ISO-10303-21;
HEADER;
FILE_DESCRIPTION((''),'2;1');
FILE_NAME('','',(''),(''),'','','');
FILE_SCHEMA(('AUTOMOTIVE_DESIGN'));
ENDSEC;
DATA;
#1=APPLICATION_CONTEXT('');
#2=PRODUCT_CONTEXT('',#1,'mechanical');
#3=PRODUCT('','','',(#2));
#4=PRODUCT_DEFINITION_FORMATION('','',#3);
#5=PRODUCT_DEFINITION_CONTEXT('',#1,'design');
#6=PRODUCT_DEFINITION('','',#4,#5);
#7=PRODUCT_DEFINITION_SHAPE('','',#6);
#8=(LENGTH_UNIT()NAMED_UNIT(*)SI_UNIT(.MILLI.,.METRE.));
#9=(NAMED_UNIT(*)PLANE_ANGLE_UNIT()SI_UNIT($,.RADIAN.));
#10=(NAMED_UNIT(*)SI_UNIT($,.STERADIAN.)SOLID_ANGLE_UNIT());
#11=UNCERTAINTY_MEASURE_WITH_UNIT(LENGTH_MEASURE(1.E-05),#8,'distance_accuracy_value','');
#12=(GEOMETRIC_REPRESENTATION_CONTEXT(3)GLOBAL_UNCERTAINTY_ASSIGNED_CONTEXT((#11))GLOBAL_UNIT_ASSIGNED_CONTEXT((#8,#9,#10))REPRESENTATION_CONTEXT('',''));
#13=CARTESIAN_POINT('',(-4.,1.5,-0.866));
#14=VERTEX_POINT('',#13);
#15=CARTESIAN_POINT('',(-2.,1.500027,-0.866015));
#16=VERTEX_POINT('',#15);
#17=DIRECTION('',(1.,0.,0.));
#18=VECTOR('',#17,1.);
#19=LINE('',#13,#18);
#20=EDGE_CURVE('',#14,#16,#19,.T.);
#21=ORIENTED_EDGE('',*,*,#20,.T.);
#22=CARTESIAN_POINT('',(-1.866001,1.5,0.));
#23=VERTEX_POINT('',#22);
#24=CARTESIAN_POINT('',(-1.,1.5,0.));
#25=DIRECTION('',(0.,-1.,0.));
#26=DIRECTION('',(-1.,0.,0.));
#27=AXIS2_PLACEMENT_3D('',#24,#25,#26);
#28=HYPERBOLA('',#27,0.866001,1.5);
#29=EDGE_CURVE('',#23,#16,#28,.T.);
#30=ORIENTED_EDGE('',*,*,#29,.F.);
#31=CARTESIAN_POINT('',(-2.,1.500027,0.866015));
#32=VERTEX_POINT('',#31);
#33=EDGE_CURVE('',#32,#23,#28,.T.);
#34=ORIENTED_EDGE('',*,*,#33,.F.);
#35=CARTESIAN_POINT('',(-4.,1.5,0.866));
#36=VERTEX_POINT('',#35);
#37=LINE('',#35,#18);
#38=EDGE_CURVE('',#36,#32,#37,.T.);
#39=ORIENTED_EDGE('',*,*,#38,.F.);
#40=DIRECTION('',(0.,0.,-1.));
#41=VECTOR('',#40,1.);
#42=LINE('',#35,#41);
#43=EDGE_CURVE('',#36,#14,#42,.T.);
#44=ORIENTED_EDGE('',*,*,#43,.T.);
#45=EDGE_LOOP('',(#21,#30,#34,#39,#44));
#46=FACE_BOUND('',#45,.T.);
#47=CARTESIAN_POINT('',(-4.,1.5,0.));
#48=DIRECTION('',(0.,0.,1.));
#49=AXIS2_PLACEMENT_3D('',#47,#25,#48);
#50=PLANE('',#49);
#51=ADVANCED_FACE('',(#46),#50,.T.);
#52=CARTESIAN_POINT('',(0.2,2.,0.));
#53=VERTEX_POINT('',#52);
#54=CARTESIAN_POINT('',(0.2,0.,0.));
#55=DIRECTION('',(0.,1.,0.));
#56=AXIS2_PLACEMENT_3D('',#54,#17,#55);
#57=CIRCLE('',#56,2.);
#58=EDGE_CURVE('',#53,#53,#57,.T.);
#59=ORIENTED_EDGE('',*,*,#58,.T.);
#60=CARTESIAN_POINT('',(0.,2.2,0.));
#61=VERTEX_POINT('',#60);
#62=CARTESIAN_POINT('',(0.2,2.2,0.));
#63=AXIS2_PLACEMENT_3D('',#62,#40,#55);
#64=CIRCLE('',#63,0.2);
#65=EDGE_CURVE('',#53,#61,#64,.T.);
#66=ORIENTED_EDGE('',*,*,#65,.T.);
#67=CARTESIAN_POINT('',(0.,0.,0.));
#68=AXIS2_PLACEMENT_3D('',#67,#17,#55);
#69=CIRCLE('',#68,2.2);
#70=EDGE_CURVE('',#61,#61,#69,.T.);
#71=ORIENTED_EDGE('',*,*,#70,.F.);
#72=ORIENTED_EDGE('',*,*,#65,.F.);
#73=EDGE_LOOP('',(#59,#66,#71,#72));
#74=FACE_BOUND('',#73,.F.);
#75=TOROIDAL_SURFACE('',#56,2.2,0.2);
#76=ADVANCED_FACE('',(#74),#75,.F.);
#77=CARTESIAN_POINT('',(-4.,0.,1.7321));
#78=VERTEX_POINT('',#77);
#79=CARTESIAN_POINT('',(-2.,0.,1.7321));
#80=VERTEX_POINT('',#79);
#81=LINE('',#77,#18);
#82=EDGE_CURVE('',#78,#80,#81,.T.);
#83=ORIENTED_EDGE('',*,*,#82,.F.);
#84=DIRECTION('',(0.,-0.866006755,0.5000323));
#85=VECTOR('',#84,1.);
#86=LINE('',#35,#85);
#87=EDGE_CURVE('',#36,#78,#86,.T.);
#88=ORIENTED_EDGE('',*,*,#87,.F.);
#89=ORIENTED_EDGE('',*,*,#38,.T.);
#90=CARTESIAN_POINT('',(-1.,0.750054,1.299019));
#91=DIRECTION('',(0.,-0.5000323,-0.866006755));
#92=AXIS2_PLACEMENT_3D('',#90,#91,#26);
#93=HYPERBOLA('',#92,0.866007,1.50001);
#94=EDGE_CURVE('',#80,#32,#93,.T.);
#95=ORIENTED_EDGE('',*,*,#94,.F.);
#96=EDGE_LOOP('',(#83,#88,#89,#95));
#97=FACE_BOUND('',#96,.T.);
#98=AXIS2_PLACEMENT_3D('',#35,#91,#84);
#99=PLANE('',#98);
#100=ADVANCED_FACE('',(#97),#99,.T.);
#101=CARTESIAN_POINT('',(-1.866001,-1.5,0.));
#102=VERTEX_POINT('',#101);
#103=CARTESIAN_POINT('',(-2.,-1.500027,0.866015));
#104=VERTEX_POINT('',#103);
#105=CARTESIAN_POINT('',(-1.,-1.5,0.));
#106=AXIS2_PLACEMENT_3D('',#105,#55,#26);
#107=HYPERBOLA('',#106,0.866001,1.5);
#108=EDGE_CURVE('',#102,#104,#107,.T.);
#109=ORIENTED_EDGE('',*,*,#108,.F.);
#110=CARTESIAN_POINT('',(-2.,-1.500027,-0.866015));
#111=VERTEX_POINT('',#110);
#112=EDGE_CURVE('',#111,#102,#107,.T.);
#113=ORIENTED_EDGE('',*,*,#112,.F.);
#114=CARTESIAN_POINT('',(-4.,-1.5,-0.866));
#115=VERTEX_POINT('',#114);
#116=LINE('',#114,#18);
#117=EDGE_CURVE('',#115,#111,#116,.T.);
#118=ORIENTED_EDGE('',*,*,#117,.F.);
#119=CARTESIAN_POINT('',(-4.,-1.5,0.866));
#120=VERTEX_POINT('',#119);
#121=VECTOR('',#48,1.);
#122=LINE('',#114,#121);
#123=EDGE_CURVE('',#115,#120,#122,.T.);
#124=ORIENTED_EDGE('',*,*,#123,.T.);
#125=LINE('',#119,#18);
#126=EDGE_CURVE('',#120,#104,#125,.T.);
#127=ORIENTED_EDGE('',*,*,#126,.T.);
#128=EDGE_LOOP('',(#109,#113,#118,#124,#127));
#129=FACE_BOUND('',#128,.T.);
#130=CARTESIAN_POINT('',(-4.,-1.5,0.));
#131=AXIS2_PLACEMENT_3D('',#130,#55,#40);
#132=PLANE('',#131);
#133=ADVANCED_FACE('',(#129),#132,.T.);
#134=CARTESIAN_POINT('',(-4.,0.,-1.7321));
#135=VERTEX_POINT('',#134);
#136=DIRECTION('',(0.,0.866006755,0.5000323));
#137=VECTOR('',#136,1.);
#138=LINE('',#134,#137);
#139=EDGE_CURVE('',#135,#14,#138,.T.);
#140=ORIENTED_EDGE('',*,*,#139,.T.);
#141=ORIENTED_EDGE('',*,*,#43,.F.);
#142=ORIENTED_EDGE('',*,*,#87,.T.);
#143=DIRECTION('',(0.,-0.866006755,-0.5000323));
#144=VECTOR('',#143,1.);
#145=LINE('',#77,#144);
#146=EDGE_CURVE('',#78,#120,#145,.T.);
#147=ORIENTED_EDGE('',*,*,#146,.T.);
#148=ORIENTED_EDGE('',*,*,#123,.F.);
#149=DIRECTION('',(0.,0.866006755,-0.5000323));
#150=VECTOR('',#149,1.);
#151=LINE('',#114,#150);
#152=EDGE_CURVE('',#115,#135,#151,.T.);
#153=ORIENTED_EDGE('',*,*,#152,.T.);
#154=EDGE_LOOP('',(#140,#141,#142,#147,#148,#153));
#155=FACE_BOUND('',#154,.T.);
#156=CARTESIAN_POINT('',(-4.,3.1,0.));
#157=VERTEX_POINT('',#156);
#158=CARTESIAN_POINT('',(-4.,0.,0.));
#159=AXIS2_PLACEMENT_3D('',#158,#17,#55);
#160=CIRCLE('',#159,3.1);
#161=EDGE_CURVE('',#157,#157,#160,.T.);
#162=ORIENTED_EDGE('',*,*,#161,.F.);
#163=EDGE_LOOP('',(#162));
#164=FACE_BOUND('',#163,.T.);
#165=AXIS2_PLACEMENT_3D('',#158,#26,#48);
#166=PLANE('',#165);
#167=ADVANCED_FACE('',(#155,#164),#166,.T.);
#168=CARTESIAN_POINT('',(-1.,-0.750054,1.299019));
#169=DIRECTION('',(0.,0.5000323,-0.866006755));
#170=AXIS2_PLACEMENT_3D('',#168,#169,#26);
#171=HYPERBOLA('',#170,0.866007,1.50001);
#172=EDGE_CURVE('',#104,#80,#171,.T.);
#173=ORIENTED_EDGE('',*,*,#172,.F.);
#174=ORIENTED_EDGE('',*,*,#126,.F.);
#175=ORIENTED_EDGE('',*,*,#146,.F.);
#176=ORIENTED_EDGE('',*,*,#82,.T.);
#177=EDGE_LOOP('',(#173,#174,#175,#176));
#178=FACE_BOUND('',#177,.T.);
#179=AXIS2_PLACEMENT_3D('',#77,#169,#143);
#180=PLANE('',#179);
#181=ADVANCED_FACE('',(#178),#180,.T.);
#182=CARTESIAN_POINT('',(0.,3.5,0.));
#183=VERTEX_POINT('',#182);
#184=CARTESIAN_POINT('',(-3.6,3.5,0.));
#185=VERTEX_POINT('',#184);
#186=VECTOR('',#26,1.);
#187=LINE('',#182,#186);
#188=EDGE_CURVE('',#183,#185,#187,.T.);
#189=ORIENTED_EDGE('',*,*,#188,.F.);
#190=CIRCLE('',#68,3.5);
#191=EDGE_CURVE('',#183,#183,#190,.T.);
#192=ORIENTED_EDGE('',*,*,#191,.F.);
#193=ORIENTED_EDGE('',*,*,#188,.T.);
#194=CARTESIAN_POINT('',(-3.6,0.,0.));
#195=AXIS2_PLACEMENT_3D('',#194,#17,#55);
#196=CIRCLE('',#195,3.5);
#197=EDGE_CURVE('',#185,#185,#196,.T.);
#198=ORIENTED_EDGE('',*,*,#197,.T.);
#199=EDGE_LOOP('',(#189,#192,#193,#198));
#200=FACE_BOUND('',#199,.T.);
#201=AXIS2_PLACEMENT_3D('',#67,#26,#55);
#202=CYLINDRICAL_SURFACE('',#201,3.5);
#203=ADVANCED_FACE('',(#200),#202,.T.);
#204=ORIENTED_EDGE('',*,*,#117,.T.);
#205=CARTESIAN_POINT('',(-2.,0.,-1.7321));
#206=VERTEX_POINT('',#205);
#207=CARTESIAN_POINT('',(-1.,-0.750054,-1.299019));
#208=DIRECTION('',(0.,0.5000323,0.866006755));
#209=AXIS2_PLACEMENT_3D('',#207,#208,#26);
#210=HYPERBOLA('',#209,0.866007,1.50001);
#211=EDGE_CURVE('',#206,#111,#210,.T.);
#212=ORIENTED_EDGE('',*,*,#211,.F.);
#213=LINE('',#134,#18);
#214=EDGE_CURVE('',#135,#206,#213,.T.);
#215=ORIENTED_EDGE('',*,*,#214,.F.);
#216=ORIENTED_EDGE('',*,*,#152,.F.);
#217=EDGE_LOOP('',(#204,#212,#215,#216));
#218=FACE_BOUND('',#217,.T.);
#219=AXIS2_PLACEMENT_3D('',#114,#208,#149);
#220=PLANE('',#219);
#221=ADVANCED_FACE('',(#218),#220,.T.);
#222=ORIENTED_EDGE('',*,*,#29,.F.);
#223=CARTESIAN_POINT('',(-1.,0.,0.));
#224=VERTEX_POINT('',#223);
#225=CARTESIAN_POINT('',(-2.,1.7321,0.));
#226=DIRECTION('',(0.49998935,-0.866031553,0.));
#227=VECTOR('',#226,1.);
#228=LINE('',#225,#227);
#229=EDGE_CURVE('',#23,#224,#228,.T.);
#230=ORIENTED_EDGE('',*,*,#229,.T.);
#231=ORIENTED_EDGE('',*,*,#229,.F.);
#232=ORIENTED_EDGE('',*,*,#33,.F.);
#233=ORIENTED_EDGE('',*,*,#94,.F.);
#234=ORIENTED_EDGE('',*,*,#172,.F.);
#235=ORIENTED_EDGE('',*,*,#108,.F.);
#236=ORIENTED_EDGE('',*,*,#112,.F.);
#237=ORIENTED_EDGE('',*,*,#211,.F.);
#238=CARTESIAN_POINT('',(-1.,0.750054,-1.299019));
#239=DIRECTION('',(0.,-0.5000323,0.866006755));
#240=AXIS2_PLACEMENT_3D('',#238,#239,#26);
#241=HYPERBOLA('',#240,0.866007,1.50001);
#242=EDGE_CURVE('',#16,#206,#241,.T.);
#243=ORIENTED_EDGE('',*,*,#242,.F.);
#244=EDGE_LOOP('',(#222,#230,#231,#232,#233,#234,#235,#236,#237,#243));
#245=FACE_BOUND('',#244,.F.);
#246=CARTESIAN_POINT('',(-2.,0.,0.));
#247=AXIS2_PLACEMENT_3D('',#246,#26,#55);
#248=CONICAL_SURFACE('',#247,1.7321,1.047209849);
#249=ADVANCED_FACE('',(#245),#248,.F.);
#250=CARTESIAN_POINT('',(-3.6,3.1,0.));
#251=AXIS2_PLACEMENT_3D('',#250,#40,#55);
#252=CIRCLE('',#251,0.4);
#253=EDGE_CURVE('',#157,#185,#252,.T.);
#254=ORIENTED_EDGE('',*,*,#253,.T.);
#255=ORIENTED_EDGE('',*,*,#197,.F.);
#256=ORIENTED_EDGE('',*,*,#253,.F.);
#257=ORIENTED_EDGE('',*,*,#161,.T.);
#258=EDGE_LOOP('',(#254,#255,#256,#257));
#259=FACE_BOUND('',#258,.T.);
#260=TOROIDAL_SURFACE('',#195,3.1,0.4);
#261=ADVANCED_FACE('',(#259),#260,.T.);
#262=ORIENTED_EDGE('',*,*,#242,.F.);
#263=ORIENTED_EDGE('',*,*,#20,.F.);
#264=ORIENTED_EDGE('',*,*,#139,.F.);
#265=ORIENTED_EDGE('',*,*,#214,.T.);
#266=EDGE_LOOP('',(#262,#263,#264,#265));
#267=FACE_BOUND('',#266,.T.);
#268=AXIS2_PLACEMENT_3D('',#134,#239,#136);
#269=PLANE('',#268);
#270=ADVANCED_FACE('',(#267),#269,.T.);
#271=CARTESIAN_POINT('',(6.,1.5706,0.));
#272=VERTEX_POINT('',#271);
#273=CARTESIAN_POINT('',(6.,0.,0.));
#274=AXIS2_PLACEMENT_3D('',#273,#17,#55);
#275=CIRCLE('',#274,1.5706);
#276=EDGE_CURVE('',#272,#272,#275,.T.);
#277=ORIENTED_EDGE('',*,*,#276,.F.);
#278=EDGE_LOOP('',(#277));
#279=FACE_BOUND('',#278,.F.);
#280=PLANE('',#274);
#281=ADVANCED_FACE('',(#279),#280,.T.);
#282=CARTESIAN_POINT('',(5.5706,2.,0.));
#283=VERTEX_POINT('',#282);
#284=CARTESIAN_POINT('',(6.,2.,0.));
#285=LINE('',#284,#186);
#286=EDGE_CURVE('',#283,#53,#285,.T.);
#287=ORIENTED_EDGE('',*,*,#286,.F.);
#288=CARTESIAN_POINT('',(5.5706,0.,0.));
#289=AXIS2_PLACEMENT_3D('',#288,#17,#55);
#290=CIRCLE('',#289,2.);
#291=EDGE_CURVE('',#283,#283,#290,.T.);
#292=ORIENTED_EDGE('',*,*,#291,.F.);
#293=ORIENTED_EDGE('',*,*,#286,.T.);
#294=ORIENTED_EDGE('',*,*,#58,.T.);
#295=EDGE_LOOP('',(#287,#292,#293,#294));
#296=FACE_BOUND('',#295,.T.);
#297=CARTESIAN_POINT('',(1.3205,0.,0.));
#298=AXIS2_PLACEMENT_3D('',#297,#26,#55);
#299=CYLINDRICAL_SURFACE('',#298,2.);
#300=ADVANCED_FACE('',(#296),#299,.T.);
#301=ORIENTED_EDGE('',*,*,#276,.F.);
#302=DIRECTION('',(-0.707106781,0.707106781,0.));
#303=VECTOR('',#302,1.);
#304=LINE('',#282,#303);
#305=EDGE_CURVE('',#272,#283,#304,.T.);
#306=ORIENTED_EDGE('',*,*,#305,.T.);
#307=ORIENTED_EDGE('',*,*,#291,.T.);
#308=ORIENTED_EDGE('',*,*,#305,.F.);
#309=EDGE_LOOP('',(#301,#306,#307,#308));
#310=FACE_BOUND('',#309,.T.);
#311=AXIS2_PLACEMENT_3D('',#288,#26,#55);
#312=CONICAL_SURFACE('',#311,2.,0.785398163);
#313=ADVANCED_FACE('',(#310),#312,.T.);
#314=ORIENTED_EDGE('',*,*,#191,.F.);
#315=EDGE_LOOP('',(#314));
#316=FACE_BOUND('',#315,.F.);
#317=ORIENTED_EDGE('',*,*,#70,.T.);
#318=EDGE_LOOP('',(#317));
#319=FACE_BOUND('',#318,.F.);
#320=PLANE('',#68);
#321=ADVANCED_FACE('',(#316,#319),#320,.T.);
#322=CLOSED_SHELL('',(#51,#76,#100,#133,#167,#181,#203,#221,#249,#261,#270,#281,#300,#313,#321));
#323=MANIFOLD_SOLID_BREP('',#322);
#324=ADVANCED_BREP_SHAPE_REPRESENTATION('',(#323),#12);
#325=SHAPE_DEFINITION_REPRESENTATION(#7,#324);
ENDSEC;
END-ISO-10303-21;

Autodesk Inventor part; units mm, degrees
ref_plane "YZ Plane" through (0, 0, 0) normal (1, 0, 0) x (0, 1, 0)
ref_plane "XZ Plane" through (0, 0, 0) normal (0, 1, 0) x (-1, 0, 0)
sketch "Skizze1" plane through (0, 0, 0) normal (0, 0, 1) x (1, 0, 0)
  line L0 (-1, 0) -> (6, 0)
  line L1 (6, 0) -> (6, 2)
  line L2 (6, 2) -> (1.75, 2)
  line L3 (1.75, 2) -> (1.3205, 2)
  line L4 (1.3205, 2) -> (0, 2)
  line L5 (0, 2) -> (0, 3.5)
  line L6 (0, 3.5) -> (-4, 3.5)
  line L7 (-4, 3.5) -> (-4, 1.7321)
  line L8 (-4, 1.7321) -> (-2, 1.7321)
  line L9 (-2, 1.7321) -> (-1, 0)
  line L10 (-6, 0) -> (8, 0) projected
  line L11 (0, -0.7) -> (0, 4.2) projected
  line L12 (1.75, 2) -> (0, 2) construction
  dimension "d1" = 4.25
  dimension "d2" = 0.4295
  dimension "d3" = 4
  dimension "d4" = 2
  dimension "d5" = 60
  dimension "d6" = 4
  dimension "d7" = 4
  dimension "d8" = 3.4641
  dimension "d9" = 7
  dimension "d26" = 6
revolve "Körper" add sketch "Skizze1" angle 360 about axis through (-1, 0, 0) along (1, 0, 0)
sketch "Skizze2" plane through (-4, 0, 0) normal (-1, 0, 0) x (0, 0, 1)
  circle A0 centre (0, 0) radius 1.7321 projected
  line L0 (0, -4.9) -> (0, 4.9) projected
  line L1 (-4.9, 0) -> (4.9, 0) projected
  line L2 (1.7321, 0) -> (0.866, -1.5)
  line L3 (0.866, -1.5) -> (-0.866, -1.5)
  line L4 (-0.866, -1.5) -> (-1.7321, 0)
  line L5 (-1.7321, 0) -> (-0.866, 1.5)
  line L6 (-0.866, 1.5) -> (0.866, 1.5)
  line L7 (0.866, 1.5) -> (1.7321, 0)
extrude "Loch" add sketch "Skizze2" against normal up to next contours L7 A0 | A0 L2 | L6 L0 A0 | A0 L0 L3 | L0 L6 A0 | A0 L3 L0 | L4 A0 | A0 L5
fillet "Rundung1" radius 0.4 1 edges at (-4, -3.5, 0)
thread "Gewinde" size "M4x0.7" class "6g" standard "ISO Metric profile" length 4.25
chamfer "Fase1" distance 0.4294 distance2 0.4294 1 edges at (6, -2, 0) measured on face at (6, 0.556, 0.0273)
ref_plane "Work Plane1" through (29, 0, 0) normal (0, -1, 0) x (1, 0, 0)
fillet "Fillet2" radius 0.2 1 edges at (0, -2, 0)
equation "\"d30\" = R"
equation "\"d15\" = -0.5 * SPD + 0.5 * GD"
equation "\"d16\" = GUL"
equation "\"d17\" = RR"
equation "\"d13\" = GEL"
equation "\"d1\" = GEL"
equation "\"d3\" = KOH"
equation "\"d4\" = INTI"
equation "\"d6\" = GD"
equation "\"d7\" = BDM"
equation "\"d8\" = 1.1547 * SW"
equation "\"d9\" = KOD"
equation "\"d26\" = NLG"
equation "\"GD\" = NND"
equation "\"NLG\" = 6"
equation "\"GEL\" = 4.25"
equation "\"KOD\" = 7"
equation "\"KOH\" = 4"
equation "\"INTI\" = 2"
equation "\"GAL\" = 0.61345 * PTC"
equation "\"GUL\" = 0.61345 * PTC"
equation "\"BDM\" = NND"
equation "\"SW\" = 3"
equation "\"RR\" = 0.4"
equation "\"SPD\" = NND - 1.2269 * PTC"
equation "\"R\" = 0.2"
equation "\"TOA\" = 30deg"
equation "\"GD1\" = THREADDIA - 1.2269 * PTC"
equation "\"THREADDIA\" = 4"
equation "\"FAWI\" = 45deg"
equation "\"ANG\" = 120deg"
equation "\"PTC\" = 0.7"
equation "\"NND\" = 4"
equation "\"E0\" = 1.155 * SW"
properties part number "DIN 912 - M4 x 6" material "Stahl, weich"
